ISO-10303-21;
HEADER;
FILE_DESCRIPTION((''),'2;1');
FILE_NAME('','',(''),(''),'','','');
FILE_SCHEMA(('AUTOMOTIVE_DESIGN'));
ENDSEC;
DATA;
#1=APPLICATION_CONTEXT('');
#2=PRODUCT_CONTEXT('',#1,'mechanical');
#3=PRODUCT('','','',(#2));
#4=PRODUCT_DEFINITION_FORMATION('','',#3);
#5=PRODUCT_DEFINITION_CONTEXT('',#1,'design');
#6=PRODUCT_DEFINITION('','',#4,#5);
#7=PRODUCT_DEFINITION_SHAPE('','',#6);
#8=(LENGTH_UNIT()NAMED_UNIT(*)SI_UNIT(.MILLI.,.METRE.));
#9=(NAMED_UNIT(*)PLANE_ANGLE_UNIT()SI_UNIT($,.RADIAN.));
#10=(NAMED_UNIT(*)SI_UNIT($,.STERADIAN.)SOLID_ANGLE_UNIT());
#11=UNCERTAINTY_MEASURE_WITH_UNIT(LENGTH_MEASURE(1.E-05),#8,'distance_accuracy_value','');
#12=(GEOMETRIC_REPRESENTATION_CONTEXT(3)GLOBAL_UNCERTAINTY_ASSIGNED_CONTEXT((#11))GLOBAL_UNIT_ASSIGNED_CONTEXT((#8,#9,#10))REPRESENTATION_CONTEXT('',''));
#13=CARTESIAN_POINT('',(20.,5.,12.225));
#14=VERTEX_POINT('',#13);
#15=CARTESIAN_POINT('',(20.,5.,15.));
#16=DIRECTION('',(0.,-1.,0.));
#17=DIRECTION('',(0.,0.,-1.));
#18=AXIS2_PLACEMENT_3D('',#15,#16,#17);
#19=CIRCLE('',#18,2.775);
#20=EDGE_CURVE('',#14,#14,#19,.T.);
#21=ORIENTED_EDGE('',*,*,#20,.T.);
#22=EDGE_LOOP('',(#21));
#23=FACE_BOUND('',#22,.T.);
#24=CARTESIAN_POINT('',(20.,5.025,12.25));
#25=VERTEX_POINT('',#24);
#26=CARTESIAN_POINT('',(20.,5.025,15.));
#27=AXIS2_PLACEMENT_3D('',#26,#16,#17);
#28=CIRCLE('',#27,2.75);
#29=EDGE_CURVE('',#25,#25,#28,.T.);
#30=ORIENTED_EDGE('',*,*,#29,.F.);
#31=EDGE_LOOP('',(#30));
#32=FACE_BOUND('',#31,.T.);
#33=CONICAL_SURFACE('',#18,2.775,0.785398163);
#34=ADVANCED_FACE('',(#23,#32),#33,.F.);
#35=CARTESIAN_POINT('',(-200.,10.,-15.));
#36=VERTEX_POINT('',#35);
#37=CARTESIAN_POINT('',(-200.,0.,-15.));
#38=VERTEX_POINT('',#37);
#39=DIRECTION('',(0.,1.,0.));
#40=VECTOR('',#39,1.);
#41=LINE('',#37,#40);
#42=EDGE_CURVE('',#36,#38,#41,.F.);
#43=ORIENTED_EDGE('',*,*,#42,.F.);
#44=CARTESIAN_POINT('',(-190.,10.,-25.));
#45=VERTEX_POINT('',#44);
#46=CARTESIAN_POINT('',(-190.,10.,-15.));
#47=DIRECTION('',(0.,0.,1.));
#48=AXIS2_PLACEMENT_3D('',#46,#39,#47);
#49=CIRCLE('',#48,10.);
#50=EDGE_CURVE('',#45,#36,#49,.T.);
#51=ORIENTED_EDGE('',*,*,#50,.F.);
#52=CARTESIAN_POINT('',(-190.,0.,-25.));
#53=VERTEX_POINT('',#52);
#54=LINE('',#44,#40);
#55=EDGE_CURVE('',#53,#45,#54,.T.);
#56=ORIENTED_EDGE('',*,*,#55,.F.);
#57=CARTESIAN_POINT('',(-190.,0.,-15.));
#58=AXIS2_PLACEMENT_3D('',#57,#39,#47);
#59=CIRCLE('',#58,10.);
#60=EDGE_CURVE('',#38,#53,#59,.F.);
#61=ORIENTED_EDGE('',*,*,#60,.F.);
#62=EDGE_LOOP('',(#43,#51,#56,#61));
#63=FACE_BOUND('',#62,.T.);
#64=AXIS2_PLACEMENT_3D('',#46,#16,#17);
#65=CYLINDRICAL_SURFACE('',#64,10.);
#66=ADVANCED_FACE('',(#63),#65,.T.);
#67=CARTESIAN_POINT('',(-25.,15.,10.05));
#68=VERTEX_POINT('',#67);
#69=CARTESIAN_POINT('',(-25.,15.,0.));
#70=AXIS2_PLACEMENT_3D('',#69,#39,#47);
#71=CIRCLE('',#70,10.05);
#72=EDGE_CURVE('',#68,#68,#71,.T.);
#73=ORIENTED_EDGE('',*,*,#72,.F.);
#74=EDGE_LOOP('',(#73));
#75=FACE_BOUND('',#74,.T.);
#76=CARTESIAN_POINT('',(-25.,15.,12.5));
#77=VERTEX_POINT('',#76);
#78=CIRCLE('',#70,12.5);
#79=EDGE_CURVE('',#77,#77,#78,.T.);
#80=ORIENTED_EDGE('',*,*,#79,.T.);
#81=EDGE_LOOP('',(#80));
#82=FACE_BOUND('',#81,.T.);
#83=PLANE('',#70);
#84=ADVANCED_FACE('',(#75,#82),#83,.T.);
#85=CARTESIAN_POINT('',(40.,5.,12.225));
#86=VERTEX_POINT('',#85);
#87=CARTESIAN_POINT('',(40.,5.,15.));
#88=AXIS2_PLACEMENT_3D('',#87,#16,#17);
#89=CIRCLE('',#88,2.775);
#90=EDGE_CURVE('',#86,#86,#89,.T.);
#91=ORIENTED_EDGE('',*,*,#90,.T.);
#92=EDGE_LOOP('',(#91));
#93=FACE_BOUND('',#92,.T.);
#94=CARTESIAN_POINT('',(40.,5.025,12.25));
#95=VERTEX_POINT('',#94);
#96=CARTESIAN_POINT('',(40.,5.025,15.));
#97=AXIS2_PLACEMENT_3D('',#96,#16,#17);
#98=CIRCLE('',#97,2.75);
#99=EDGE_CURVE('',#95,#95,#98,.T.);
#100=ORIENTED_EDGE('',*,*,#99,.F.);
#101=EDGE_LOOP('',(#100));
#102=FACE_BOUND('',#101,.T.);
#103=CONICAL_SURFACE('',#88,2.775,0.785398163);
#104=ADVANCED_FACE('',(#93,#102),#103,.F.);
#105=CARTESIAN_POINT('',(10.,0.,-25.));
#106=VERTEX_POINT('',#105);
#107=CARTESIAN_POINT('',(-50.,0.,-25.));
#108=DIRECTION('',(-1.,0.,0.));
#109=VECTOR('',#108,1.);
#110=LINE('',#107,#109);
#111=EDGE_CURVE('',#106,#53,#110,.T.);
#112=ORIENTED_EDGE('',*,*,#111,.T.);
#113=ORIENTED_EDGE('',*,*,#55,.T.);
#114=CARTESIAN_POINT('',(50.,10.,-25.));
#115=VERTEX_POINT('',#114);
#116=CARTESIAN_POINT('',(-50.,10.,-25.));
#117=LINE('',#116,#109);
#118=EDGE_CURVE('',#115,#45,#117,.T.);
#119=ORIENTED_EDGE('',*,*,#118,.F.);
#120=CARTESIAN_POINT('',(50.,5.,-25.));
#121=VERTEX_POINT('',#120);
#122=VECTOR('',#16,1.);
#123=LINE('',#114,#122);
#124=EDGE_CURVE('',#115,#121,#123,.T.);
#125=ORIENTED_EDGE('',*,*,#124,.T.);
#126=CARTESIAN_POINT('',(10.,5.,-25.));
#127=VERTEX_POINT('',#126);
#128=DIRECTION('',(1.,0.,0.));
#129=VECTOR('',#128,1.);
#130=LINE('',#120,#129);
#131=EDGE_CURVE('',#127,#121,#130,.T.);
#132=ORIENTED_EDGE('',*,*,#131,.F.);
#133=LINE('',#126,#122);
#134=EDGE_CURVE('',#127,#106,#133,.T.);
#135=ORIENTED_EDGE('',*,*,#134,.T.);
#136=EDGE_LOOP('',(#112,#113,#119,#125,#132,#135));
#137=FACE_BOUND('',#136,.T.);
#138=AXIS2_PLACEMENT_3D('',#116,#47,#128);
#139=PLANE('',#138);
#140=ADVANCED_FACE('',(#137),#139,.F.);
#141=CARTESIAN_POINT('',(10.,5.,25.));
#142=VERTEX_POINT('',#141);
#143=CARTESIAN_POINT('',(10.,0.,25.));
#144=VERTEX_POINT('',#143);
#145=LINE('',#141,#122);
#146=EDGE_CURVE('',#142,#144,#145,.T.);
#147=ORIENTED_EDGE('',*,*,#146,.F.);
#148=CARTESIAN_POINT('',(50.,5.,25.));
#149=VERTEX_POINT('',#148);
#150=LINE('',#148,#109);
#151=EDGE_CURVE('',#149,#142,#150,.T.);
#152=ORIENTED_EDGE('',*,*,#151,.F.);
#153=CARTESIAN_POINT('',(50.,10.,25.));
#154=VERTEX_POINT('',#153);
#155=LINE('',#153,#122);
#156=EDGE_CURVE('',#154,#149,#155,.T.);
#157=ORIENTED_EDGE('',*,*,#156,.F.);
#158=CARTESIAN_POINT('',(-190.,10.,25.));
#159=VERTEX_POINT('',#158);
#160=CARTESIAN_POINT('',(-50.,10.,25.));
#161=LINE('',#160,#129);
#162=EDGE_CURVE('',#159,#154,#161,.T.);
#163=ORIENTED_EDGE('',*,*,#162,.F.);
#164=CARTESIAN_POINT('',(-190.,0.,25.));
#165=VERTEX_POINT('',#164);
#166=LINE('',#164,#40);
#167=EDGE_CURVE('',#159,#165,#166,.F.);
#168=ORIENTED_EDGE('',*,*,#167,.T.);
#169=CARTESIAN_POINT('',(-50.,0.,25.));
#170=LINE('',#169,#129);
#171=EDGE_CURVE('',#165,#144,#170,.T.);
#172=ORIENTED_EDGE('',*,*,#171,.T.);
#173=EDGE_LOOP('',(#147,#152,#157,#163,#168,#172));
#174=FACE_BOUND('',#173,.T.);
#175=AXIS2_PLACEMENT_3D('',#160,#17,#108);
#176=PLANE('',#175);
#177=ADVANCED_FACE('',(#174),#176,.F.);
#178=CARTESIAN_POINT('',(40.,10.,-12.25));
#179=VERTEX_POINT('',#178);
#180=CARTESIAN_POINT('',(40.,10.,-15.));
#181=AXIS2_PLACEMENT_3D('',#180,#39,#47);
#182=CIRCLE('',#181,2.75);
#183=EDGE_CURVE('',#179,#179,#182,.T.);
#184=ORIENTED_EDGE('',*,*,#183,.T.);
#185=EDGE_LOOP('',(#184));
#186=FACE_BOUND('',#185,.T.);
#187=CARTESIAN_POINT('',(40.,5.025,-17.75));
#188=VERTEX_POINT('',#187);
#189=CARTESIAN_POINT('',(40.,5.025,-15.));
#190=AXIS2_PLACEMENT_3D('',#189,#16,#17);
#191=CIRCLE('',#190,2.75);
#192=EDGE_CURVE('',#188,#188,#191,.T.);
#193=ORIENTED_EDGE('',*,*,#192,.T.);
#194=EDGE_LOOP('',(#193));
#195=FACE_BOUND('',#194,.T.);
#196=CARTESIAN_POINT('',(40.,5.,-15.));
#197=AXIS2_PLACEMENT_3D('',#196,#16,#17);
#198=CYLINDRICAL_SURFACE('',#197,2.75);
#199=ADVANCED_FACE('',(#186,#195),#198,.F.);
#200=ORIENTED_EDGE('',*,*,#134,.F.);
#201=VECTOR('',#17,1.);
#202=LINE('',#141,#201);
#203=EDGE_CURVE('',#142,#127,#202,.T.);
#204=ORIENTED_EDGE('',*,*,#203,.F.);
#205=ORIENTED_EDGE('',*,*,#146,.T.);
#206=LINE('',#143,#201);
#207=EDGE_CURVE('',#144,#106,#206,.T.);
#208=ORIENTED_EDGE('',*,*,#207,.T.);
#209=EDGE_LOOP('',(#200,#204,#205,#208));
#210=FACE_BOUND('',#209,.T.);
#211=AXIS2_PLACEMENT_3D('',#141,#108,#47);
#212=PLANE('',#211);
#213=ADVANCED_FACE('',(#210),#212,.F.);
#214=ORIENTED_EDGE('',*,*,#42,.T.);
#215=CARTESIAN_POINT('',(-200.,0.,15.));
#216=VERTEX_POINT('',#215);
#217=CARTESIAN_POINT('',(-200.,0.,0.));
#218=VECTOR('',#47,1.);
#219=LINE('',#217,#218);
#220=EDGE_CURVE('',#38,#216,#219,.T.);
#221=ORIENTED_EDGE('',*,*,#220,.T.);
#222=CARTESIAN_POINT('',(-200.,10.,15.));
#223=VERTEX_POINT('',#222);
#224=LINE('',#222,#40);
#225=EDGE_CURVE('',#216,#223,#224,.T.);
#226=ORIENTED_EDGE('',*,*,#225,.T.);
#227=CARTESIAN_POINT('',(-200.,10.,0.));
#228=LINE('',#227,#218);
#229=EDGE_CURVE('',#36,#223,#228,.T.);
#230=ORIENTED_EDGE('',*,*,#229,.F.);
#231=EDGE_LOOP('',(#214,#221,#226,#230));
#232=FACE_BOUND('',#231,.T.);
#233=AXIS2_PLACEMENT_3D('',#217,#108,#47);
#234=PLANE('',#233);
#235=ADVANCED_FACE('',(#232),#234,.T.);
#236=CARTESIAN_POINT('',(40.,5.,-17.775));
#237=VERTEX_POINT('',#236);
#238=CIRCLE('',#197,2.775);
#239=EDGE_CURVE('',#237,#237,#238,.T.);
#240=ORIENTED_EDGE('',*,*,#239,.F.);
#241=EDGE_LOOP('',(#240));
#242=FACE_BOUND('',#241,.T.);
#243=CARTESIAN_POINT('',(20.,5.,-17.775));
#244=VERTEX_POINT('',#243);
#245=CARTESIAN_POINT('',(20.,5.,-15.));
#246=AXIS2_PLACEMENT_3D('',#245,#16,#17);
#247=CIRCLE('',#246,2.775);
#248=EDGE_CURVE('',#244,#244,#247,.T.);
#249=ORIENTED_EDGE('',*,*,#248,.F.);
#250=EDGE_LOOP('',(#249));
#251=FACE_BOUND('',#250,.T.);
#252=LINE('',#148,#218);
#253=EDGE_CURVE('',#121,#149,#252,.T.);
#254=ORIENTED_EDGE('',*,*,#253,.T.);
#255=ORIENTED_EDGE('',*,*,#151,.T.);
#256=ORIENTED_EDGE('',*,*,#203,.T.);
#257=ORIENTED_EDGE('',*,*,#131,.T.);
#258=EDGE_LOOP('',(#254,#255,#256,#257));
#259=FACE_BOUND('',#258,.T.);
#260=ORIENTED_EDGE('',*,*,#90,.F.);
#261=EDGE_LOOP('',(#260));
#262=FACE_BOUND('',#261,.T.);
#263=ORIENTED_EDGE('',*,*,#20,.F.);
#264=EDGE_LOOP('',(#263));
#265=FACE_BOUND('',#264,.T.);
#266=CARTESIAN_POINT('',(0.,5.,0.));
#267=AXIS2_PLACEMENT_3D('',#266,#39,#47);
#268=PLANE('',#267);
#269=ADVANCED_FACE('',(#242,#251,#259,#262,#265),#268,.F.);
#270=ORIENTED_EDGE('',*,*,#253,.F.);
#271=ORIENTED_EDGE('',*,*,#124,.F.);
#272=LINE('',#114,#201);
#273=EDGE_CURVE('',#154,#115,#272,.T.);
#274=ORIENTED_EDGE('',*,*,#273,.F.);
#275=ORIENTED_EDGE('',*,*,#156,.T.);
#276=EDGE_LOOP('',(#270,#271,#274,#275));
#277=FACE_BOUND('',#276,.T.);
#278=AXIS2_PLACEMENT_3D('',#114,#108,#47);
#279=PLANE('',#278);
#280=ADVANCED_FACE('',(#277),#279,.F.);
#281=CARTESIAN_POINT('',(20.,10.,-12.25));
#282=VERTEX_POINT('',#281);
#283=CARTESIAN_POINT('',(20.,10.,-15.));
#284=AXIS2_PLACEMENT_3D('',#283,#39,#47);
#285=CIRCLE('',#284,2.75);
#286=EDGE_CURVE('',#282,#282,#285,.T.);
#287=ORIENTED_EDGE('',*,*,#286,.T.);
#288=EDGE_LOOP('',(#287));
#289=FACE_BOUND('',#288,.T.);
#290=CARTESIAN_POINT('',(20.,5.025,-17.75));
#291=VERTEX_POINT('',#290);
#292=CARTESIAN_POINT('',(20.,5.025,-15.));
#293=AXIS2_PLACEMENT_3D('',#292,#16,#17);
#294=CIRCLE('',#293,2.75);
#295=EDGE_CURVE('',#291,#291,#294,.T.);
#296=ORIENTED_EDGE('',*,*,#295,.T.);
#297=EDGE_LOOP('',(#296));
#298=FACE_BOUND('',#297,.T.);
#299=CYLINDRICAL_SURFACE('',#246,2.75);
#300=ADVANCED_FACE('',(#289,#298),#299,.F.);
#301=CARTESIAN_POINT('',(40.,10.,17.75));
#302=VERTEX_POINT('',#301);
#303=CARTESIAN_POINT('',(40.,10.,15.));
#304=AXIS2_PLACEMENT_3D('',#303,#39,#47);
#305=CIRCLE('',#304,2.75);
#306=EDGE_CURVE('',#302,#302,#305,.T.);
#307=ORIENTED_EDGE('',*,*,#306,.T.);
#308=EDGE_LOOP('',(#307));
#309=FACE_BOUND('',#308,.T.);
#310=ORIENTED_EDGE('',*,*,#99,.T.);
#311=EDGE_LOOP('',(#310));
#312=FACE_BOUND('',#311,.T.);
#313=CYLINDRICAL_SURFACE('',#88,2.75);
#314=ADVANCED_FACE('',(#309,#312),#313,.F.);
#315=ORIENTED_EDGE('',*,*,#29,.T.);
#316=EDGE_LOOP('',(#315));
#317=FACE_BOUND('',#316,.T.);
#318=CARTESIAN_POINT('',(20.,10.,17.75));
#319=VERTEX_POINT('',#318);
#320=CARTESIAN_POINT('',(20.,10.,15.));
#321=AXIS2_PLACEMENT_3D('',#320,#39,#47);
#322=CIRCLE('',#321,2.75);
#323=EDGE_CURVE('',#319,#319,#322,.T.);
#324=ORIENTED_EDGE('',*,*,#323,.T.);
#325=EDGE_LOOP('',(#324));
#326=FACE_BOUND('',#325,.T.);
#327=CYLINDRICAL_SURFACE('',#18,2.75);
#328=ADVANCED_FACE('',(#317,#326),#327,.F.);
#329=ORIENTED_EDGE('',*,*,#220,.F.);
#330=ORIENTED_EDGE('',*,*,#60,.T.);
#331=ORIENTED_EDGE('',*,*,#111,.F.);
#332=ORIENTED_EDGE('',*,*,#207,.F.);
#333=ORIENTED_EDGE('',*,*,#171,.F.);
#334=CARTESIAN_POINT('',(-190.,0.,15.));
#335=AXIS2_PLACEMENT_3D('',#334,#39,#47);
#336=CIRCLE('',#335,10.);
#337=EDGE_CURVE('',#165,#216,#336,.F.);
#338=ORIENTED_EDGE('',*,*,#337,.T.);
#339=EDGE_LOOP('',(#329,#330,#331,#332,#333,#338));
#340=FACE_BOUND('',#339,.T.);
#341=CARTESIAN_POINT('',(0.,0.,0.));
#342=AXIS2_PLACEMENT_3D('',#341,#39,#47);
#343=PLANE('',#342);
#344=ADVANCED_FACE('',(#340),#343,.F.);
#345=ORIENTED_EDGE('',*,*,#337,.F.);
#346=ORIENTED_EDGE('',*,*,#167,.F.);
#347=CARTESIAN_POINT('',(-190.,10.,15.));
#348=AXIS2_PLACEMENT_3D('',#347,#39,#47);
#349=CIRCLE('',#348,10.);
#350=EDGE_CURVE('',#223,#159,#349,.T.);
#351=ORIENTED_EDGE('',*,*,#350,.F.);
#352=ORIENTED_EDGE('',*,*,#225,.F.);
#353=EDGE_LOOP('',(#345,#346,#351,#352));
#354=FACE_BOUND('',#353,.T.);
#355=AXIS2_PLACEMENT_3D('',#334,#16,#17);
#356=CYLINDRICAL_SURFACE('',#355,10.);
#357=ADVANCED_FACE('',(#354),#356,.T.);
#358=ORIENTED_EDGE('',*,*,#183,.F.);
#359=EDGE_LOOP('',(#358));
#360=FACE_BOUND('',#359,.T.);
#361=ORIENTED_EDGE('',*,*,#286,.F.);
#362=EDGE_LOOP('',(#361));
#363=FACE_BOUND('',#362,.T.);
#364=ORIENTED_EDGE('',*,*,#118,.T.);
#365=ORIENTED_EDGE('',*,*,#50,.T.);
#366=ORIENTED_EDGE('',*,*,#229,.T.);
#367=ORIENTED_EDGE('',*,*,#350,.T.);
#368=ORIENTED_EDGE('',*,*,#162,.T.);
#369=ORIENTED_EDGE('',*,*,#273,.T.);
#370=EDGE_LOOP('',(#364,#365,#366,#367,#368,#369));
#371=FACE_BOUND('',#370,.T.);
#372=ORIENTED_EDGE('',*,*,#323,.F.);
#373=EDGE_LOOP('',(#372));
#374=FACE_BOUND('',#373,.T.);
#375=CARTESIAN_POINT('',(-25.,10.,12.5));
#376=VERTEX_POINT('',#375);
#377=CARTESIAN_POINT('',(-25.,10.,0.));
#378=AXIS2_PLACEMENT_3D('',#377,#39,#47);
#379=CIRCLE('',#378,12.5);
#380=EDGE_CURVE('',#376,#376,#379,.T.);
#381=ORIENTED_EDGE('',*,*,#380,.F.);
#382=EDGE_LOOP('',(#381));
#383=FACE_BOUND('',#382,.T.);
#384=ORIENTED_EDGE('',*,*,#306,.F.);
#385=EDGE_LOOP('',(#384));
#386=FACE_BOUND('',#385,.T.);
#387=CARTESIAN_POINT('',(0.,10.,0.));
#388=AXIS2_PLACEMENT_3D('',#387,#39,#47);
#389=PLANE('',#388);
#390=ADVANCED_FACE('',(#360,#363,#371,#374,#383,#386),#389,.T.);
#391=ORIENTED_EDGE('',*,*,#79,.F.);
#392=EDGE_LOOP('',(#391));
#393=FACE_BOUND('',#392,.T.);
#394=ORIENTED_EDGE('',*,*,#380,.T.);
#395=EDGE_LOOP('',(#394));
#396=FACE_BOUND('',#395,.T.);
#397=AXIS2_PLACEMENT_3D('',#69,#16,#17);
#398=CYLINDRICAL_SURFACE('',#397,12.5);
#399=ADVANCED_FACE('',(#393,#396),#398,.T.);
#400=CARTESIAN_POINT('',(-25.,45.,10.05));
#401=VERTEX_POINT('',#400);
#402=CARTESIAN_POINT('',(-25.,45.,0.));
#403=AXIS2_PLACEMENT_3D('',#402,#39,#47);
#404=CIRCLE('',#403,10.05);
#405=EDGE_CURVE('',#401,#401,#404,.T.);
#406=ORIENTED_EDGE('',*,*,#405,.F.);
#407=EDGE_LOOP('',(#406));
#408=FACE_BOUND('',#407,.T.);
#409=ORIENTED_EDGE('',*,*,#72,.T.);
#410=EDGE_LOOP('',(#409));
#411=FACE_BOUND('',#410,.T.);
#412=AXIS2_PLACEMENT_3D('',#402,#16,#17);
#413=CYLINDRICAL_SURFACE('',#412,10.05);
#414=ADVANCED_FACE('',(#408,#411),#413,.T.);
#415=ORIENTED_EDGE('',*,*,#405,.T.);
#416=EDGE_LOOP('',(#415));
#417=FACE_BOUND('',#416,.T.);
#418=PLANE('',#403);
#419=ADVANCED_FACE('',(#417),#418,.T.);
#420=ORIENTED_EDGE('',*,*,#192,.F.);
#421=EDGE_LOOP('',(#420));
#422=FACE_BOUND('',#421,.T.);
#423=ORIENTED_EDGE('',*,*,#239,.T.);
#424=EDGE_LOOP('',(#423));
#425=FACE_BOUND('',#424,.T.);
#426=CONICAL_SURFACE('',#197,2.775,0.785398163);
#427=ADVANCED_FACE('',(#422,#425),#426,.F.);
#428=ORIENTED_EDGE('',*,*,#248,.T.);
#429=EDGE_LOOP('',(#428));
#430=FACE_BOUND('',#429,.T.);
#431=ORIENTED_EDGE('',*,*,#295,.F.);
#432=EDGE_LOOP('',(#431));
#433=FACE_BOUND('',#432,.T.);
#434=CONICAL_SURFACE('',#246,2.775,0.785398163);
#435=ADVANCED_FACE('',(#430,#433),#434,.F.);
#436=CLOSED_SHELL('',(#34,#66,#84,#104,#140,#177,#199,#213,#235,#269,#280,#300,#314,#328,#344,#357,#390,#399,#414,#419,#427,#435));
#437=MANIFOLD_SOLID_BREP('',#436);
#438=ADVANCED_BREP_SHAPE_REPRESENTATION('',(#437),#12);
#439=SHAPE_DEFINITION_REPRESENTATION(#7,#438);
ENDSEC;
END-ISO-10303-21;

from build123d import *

# Parameters (mm, degrees)
SKETCH1_W           = 100
SKETCH1_H           = 50
BOSS_EXTRUDE1_DEPTH = 10
SKETCH8_W           = 150
SKETCH8_H           = 50
BOSS_EXTRUDE3_DEPTH = 10
SKETCH10_R          = 12.5
BOSS_EXTRUDE4_DEPTH = 5
SKETCH12_R          = 10.05
BOSS_EXTRUDE5_DEPTH = 30
SKETCH13_W          = 40
SKETCH13_H          = 50
CUT_EXTRUDE3_DEPTH  = 5
FILLET1_R           = 10


# Read off the part's stored shape, not the designer's step: M5 Clearance Hole1
with BuildPart() as part:
    # Sketch1 → Boss-Extrude1 (new body)
    with BuildSketch(Plane(origin=(0, 0, 0), x_dir=(1, 0, 0), z_dir=(0, 1, 0))):
        Rectangle(SKETCH1_W, SKETCH1_H)
    extrude(amount=BOSS_EXTRUDE1_DEPTH)

    # Sketch8 → Boss-Extrude3 (add)
    with BuildSketch(Plane(origin=(0, 10, 0), x_dir=(1, 0, 0), z_dir=(0, 1, 0))):
        with Locations((-125, 0)):
            Rectangle(SKETCH8_W, SKETCH8_H)
    extrude(amount=-BOSS_EXTRUDE3_DEPTH)

    # Sketch10 → Boss-Extrude4 (add)
    with BuildSketch(Plane(origin=(0, 10, 0), x_dir=(1, 0, 0), z_dir=(0, 1, 0))):
        with Locations(Location((-25, 0, 0), (0, 0, 270))):
            Circle(SKETCH10_R)
    extrude(amount=BOSS_EXTRUDE4_DEPTH)

    # Sketch12 → Boss-Extrude5 (add)
    with BuildSketch(Plane(origin=(0, 15, 0), x_dir=(1, 0, 0), z_dir=(0, 1, 0))):
        with Locations(Location((-25, 0, 0), (0, 0, 270))):
            Circle(SKETCH12_R)
    extrude(amount=BOSS_EXTRUDE5_DEPTH)

    # Sketch13 → Cut-Extrude3 (cut)
    with BuildSketch(Plane.XZ):
        with Locations((30, 0)):
            Rectangle(SKETCH13_W, SKETCH13_H)
    extrude(amount=-CUT_EXTRUDE3_DEPTH, mode=Mode.SUBTRACT)

    # M5 Clearance Hole1 outline → M5 Clearance Hole1 (revolve, cut)
    with BuildSketch(Plane(origin=(20, 0, -15), x_dir=(1, 0, 0), z_dir=(0, 0, 1))):
        Polygon((2.75, 5.025), (2.75, 10), (0, 10), (0, 5), (2.775, 5), align=None)
    revolve(axis=Axis((20, 0, -15), (0, 1, 0)), mode=Mode.SUBTRACT)

    # M5 Clearance Hole1 2 outline → M5 Clearance Hole1 2 (revolve, cut)
    with BuildSketch(Plane(origin=(20, 0, 15), x_dir=(1, 0, 0), z_dir=(0, 0, 1))):
        Polygon((2.75, 5.025), (2.75, 10), (0, 10), (0, 5), (2.775, 5), align=None)
    revolve(axis=Axis((20, 0, 15), (0, 1, 0)), mode=Mode.SUBTRACT)

    # M5 Clearance Hole1 3 outline → M5 Clearance Hole1 3 (revolve, cut)
    with BuildSketch(Plane(origin=(40, 0, 15), x_dir=(1, 0, 0), z_dir=(0, 0, 1))):
        Polygon((2.75, 5.025), (2.75, 10), (0, 10), (0, 5), (2.775, 5), align=None)
    revolve(axis=Axis((40, 0, 15), (0, 1, 0)), mode=Mode.SUBTRACT)

    # M5 Clearance Hole1 4 outline → M5 Clearance Hole1 4 (revolve, cut)
    with BuildSketch(Plane(origin=(40, 0, -15), x_dir=(1, 0, 0), z_dir=(0, 0, 1))):
        Polygon((2.75, 5.025), (2.75, 10), (0, 10), (0, 5), (2.775, 5), align=None)
    revolve(axis=Axis((40, 0, -15), (0, 1, 0)), mode=Mode.SUBTRACT)

    # Fillet1
    fillet1_edges = [part.edges().sort_by_distance(p)[0] for p in [
        (-200, 5, -25),
        (-200, 5, 25),
    ]]
    fillet(fillet1_edges, radius=FILLET1_R)


solid = part.part
